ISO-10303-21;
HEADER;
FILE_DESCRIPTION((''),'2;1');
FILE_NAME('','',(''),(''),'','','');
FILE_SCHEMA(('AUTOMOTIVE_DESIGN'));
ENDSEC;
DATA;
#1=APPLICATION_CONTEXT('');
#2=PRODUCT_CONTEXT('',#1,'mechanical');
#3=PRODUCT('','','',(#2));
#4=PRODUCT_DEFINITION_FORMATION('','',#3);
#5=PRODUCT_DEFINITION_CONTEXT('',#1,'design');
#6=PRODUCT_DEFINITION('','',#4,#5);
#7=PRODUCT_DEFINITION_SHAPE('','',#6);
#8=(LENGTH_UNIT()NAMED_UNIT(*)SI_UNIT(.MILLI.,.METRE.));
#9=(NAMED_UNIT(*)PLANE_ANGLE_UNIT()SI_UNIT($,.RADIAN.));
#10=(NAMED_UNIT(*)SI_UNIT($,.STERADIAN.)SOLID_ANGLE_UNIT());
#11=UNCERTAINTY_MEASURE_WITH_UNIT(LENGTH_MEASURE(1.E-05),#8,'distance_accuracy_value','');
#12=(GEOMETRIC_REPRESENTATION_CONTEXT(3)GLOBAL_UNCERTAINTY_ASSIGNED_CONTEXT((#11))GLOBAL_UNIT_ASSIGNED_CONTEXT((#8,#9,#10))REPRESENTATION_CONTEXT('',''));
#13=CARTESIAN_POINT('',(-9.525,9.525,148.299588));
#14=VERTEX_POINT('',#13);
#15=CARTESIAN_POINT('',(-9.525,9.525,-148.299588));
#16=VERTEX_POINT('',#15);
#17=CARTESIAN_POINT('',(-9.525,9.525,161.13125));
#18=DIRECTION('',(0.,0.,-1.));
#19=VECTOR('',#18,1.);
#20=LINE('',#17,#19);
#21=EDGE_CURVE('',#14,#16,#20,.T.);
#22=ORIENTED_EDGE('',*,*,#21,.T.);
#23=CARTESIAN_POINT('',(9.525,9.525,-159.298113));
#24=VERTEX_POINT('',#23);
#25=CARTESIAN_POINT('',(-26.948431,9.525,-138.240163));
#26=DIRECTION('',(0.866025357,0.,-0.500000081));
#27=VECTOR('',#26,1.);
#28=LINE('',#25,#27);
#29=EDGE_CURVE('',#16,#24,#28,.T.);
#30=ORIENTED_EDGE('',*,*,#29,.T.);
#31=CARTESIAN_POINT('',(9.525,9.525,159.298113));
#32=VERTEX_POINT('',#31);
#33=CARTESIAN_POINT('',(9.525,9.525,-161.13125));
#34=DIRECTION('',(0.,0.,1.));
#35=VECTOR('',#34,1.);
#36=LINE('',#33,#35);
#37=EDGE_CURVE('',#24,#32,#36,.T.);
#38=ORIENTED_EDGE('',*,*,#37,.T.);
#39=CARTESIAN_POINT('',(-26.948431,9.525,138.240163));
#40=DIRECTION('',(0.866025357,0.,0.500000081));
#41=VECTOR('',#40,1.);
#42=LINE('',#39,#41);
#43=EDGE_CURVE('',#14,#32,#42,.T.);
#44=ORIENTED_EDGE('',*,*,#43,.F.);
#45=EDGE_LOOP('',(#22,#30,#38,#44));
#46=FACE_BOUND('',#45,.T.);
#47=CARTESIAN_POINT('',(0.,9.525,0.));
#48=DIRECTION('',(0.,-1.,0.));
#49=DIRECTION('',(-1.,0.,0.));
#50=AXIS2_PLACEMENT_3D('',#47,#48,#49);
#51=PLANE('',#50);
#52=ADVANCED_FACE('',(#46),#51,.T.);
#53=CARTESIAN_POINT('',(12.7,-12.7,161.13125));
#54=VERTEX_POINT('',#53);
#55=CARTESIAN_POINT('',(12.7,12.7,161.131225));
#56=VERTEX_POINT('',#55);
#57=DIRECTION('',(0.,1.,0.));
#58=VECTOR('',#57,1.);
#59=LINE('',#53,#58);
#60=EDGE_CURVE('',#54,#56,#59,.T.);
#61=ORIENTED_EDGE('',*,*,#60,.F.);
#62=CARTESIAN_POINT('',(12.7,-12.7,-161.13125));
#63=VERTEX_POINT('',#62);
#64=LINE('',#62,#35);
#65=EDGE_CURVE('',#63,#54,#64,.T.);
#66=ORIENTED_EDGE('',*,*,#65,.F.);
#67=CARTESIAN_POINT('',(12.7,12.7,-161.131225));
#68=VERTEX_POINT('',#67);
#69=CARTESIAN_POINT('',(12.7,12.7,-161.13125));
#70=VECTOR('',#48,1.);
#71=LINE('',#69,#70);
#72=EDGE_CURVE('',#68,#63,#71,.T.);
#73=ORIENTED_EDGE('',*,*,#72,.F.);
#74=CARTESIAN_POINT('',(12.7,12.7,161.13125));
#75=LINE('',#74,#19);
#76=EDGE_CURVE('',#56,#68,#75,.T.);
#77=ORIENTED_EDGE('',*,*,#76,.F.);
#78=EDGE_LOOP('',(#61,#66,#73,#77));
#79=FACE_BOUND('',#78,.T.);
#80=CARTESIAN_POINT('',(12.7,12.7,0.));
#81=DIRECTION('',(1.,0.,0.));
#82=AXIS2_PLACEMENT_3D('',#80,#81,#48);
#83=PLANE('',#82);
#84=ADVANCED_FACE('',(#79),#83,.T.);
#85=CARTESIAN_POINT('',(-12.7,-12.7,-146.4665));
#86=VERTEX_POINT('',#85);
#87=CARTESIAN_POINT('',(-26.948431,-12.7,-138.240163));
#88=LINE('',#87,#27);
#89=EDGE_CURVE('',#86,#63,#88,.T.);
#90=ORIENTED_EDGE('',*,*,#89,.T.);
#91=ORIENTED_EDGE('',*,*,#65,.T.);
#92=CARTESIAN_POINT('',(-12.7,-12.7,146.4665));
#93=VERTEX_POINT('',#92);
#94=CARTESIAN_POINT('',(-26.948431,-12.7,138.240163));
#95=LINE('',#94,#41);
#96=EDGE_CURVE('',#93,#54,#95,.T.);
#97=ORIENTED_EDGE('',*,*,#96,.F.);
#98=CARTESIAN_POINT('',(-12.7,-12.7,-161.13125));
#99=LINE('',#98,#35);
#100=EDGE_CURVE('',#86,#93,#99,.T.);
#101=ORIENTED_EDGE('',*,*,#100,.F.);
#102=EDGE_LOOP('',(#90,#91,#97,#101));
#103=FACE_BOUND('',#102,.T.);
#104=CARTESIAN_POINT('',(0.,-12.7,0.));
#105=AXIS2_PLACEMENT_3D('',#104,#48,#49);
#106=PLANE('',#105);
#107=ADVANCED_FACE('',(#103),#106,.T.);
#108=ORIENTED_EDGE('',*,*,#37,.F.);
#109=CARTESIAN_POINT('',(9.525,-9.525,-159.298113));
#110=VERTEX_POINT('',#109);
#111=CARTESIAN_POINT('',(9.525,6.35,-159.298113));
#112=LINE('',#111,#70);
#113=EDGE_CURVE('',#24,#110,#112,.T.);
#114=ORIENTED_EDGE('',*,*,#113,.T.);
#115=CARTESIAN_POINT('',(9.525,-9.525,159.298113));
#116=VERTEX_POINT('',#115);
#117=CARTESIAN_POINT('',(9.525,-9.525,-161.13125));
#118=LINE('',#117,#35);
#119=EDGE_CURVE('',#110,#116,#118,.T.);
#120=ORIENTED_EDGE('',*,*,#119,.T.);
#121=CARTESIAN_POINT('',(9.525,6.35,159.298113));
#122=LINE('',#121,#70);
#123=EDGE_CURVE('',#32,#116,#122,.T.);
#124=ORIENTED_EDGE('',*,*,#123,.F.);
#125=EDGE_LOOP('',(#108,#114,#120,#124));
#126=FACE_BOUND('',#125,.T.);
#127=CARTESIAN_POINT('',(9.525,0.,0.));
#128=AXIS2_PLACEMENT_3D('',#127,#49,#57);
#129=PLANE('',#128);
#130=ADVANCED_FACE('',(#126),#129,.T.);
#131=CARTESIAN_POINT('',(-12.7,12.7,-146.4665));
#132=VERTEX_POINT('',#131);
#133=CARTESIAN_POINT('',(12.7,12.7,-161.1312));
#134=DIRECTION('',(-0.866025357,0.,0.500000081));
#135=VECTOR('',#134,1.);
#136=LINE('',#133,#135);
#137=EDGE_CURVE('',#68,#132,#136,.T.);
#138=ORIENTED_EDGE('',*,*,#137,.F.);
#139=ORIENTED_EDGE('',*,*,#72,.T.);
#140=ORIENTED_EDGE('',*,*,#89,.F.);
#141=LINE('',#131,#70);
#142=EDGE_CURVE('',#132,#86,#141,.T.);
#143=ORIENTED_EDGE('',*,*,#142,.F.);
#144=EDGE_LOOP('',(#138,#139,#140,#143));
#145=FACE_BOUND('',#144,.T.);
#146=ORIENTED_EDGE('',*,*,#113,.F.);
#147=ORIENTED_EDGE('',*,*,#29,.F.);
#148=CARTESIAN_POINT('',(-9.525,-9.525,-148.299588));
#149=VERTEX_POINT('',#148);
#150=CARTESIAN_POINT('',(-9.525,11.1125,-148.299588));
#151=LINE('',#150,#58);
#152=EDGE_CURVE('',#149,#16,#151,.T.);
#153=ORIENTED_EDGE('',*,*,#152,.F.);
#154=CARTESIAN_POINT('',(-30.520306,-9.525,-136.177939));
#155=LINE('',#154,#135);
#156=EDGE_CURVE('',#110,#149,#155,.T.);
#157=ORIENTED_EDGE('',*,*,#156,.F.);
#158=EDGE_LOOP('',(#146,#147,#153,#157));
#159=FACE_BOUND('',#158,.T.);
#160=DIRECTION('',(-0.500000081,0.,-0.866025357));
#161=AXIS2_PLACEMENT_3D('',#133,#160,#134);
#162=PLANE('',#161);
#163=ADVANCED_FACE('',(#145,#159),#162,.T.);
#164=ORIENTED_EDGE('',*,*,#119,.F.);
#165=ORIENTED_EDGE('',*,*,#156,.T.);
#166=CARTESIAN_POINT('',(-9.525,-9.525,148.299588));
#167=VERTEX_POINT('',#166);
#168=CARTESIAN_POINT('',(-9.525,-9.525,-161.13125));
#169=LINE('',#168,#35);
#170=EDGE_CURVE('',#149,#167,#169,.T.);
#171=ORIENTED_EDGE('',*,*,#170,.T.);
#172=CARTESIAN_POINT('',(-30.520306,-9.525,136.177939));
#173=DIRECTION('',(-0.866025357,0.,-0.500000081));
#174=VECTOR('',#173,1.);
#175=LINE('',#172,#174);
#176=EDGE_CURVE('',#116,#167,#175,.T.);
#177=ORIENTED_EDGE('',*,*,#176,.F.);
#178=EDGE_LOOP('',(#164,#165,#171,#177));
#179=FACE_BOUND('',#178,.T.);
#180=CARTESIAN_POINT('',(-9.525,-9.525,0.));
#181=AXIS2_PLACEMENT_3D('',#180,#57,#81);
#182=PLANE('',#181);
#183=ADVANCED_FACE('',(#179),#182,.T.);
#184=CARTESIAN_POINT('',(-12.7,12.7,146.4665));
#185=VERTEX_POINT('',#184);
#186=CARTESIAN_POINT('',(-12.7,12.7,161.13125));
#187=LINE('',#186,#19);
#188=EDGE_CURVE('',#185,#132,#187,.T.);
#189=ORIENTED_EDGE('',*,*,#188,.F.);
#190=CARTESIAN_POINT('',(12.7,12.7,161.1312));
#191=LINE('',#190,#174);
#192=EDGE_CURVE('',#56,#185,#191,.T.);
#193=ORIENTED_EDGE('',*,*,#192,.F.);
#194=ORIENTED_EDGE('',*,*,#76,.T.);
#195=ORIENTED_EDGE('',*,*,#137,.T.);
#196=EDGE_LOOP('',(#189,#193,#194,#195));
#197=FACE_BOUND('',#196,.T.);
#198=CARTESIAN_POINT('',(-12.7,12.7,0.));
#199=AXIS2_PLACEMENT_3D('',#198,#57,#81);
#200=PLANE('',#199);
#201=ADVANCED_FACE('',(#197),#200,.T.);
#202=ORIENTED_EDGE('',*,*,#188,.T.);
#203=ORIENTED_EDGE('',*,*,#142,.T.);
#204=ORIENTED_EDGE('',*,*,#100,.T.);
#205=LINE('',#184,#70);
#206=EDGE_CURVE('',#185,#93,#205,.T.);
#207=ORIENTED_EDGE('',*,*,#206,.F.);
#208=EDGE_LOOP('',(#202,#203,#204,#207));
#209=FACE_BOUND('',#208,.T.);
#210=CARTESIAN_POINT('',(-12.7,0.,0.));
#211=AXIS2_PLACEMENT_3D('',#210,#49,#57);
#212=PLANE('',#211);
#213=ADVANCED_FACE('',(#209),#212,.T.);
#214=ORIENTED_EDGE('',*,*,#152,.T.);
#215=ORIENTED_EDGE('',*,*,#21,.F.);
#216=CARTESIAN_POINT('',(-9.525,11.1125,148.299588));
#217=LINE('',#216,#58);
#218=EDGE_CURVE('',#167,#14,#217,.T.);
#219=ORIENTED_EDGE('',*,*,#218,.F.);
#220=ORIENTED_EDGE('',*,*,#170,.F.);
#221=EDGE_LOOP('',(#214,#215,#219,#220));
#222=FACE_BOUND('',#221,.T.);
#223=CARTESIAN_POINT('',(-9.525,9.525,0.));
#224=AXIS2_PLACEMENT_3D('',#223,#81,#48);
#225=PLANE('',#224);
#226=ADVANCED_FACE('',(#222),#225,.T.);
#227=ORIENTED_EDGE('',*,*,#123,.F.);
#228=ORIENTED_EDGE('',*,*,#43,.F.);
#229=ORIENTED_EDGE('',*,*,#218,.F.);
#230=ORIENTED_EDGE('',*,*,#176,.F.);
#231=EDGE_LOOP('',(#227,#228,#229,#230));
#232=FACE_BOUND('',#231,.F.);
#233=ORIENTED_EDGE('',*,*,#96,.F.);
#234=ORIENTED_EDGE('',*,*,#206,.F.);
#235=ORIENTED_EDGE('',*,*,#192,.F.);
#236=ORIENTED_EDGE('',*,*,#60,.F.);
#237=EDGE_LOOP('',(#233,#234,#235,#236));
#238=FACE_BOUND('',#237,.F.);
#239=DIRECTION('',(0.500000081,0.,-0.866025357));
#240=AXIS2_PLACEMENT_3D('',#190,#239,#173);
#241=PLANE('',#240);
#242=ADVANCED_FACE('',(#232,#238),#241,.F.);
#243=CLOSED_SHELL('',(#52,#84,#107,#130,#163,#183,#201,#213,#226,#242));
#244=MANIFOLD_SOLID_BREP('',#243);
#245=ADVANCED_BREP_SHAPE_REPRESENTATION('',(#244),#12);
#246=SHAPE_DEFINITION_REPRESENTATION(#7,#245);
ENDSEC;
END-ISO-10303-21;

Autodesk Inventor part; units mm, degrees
ref_plane "YZ Plane" through (0, 0, 0) normal (1, 0, 0) x (0, 1, 0)
ref_plane "XZ Plane" through (0, 0, 0) normal (0, 1, 0) x (-1, 0, 0)
ref_plane "XY Plane" through (0, 0, 0) normal (0, 0, 1) x (1, 0, 0)
sketch "Sketch1" plane through (0, 0, 0) normal (0, 0, 1) x (1, 0, 0)
  line L0 (-17.78, 0) -> (17.78, 0) projected
  line L1 (0, -17.78) -> (0, 17.78) projected
  line L2 (-12.7, 12.7) -> (12.7, 12.7)
  line L3 (12.7, 12.7) -> (12.7, -12.7)
  line L4 (12.7, -12.7) -> (-12.7, -12.7)
  line L5 (-12.7, -12.7) -> (-12.7, 12.7)
  line L6 (9.525, 9.525) -> (-9.525, 9.525)
  line L7 (-9.525, 9.525) -> (-9.525, -9.525)
  line L8 (-9.525, -9.525) -> (9.525, -9.525)
  line L9 (9.525, -9.525) -> (9.525, 9.525)
  point P0 (0, 0)
  point P1 (-12.7, 0)
  point P2 (0, 12.7)
  dimension "d0" = 25.4
  dimension "d1" = 3.175
extrude "Base" add sketch "Sketch1" along normal mid plane 322.2625 contours L5 L2 L1 L6 L7 L0 | L0 L7 L8 L1 L4 L5 | L1 L8 L9 L0 L3 L4 | L2 L3 L0 L9 L6 L1
sketch "Sketch6" plane through (-12.7, 12.7, 161.1312) normal (0, 1, 0) x (1, 0, 0)
  line L0 (0, 0) -> (25.4, 0) projected
  line L1 (0, 322.2625) -> (0, 0) projected
  line L2 (25.4, 0) -> (0, 14.6647)
  point P0 (12.7, 161.1312)
  dimension "d15" = 30
extrude "Extrusion6" cut sketch "Sketch6" against normal through all
sketch "Sketch7" plane through (-12.7, 12.7, -161.1312) normal (0, 1, 0) x (1, 0, 0)
  line L0 (25.4, 0) -> (0, 0) projected
  line L1 (0, 0) -> (0, -307.5978) projected
  line L2 (25.4, 0) -> (0, -14.6647)
  point P0 (12.7, -161.1312)
  dimension "d18" = 30
extrude "Extrusion7" cut sketch "Sketch7" against normal through all
properties part number "tubing_template_0.125" material "Aluminum-6061"
